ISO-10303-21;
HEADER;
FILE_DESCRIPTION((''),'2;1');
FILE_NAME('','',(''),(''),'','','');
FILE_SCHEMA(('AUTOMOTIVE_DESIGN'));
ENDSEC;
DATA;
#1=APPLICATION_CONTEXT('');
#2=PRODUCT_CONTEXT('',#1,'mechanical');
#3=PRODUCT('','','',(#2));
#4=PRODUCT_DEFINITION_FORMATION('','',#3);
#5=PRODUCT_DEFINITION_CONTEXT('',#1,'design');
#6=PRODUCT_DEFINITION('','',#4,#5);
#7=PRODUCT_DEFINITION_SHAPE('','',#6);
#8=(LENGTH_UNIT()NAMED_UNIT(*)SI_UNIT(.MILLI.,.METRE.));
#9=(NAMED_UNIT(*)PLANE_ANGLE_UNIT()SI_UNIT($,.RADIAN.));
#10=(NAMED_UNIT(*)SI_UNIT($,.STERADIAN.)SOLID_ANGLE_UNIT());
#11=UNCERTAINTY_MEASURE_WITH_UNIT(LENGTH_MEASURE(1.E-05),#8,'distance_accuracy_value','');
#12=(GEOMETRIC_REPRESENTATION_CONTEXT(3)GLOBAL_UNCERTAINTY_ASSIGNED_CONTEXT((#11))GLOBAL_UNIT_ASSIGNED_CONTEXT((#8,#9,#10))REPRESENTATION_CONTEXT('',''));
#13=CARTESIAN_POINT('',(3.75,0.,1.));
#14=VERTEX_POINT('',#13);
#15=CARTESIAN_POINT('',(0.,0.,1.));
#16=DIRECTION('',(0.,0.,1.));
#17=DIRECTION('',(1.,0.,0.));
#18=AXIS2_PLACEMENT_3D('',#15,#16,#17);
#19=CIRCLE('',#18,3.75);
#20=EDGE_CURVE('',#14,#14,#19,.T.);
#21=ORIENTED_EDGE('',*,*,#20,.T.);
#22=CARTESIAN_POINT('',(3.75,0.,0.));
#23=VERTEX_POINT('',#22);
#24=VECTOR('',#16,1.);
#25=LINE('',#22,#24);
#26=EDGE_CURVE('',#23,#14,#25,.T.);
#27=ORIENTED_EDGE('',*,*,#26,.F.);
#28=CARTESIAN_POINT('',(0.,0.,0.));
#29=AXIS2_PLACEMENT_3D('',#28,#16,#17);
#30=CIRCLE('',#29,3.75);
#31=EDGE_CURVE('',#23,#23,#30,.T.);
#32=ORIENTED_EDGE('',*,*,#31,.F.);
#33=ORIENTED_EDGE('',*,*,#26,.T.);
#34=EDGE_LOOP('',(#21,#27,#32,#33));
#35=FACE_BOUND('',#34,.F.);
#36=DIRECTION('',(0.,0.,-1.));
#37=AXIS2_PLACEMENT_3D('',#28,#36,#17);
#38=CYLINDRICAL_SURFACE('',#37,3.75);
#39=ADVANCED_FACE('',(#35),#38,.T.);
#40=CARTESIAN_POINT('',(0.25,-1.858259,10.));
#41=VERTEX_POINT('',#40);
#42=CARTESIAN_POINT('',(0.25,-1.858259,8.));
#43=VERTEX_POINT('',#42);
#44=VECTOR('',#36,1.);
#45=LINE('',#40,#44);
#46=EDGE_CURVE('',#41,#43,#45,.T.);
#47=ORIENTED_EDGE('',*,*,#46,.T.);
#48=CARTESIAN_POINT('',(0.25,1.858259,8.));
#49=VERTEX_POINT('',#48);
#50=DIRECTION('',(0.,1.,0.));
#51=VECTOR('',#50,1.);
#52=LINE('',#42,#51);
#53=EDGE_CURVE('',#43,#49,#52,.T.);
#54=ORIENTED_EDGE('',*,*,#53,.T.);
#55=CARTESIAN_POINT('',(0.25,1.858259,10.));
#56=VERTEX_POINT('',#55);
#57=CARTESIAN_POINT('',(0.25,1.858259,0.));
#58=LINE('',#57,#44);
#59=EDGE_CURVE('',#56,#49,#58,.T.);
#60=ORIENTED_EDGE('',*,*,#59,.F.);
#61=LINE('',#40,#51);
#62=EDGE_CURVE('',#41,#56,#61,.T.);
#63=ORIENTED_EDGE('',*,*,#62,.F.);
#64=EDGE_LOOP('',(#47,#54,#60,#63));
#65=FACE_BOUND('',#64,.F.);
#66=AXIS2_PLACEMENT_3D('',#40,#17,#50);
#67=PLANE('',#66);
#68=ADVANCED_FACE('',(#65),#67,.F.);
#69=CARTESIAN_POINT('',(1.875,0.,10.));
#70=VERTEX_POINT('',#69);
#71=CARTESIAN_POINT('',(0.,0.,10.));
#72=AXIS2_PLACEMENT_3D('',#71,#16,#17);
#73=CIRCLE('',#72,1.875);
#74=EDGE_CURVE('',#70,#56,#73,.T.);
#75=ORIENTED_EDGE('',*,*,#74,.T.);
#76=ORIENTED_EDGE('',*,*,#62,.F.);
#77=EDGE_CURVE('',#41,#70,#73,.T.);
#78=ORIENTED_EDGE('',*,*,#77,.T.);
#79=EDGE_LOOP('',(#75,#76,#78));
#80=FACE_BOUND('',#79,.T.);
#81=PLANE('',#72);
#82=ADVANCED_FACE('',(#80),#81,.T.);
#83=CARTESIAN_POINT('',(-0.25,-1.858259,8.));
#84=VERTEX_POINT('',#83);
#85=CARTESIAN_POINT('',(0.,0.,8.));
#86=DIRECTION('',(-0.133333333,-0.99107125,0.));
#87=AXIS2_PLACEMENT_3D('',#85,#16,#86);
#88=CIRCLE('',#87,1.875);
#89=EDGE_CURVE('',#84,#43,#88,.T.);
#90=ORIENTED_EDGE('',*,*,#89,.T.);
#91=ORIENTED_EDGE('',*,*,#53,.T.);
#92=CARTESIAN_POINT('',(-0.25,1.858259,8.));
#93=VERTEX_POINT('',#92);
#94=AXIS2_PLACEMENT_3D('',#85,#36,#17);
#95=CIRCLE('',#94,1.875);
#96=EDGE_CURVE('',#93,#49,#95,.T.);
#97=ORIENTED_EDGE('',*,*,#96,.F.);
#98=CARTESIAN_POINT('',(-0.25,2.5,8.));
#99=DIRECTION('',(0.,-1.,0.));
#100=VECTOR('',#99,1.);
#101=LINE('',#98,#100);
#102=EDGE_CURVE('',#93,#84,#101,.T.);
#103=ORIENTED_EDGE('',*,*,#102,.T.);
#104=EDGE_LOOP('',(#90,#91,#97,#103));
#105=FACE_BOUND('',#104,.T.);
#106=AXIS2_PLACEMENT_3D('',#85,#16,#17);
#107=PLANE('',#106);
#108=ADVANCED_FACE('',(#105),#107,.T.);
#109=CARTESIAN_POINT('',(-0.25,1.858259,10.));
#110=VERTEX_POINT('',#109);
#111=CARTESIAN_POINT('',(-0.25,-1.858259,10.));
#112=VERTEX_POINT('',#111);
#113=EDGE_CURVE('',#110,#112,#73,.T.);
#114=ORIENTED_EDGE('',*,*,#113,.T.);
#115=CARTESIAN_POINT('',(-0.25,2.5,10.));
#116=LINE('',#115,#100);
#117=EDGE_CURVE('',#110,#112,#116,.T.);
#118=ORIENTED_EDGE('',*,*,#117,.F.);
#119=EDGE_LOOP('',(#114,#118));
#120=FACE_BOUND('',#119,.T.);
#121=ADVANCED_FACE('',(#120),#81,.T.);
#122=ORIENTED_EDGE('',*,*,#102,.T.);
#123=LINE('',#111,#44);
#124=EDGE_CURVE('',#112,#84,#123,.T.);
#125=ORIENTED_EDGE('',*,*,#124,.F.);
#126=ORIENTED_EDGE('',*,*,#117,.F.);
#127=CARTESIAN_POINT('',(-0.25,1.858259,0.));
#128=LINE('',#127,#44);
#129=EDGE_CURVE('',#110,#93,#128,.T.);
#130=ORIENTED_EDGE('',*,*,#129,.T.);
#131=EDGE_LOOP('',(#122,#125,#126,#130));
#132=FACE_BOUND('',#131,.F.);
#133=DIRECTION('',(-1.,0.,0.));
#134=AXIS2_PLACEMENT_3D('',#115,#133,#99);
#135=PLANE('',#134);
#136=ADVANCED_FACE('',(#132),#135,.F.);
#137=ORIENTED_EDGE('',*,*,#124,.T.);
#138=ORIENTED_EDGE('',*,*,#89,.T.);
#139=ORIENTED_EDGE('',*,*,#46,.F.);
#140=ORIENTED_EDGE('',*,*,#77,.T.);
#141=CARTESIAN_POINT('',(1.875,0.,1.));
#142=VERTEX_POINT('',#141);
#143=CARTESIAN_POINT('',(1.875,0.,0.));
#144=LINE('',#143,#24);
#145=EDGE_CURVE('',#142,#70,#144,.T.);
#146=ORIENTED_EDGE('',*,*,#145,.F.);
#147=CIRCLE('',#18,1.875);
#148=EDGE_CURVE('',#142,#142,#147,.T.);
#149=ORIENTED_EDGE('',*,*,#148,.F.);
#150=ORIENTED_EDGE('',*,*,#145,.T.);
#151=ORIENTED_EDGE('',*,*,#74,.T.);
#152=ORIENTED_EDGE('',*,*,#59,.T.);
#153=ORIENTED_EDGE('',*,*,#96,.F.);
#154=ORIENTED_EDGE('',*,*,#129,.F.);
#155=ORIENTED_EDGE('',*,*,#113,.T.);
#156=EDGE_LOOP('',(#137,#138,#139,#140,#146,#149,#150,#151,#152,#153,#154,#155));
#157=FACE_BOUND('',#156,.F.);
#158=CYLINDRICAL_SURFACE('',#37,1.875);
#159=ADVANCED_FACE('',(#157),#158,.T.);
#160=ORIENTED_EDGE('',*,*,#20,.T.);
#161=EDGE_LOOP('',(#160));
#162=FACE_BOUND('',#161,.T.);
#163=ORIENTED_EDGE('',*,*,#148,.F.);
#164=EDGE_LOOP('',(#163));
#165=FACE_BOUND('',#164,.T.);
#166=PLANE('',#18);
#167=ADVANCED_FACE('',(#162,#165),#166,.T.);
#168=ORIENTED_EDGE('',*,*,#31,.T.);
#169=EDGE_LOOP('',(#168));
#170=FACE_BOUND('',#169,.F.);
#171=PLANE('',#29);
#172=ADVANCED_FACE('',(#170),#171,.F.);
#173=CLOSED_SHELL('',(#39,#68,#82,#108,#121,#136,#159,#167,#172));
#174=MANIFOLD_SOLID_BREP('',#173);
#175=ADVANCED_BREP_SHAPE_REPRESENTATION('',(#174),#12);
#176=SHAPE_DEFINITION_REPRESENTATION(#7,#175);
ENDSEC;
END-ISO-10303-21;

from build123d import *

# Parameters (mm, degrees)
F0_R     = 1.875
F1_DEPTH = 10
F0_R_2   = 3.75
F2_DEPTH = 1
F4_DEPTH = 2


with BuildPart() as f1:
    # F0 (on Top) → F1 (new body)
    with BuildSketch(Plane.XY):
        Circle(F0_R)
    extrude(amount=F1_DEPTH)

    # F0 (on Top) → F2 (join)
    with BuildSketch(Plane.XY):
        Circle(F0_R_2)
        Circle(F0_R, mode=Mode.SUBTRACT)
    extrude(amount=F2_DEPTH)

    # F3 (on face) → F4 (cut)
    with BuildSketch(Plane.XY.offset(10)):
        with BuildLine():
            Line((-0.25, 1.8582585934), (-0.25, -1.8582585934))
            ThreePointArc((-0.25, -1.8582585934), (0, -1.875), (0.25, -1.8582585934))
            Line((0.25, -1.8582585934), (0.25, 1.8582585934))
            ThreePointArc((0.25, 1.8582585934), (0, 1.875), (-0.25, 1.8582585934))
        make_face()
        with BuildLine():
            Line((-0.25, 2.5), (-0.25, 1.8582585934))
            ThreePointArc((-0.25, 1.8582585934), (0, 1.875), (0.25, 1.8582585934))
            Line((0.25, 1.8582585934), (0.25, 2.5))
            Line((0.25, 2.5), (-0.25, 2.5))
        make_face()
    extrude(amount=-F4_DEPTH, mode=Mode.SUBTRACT)


solid = f1.part
